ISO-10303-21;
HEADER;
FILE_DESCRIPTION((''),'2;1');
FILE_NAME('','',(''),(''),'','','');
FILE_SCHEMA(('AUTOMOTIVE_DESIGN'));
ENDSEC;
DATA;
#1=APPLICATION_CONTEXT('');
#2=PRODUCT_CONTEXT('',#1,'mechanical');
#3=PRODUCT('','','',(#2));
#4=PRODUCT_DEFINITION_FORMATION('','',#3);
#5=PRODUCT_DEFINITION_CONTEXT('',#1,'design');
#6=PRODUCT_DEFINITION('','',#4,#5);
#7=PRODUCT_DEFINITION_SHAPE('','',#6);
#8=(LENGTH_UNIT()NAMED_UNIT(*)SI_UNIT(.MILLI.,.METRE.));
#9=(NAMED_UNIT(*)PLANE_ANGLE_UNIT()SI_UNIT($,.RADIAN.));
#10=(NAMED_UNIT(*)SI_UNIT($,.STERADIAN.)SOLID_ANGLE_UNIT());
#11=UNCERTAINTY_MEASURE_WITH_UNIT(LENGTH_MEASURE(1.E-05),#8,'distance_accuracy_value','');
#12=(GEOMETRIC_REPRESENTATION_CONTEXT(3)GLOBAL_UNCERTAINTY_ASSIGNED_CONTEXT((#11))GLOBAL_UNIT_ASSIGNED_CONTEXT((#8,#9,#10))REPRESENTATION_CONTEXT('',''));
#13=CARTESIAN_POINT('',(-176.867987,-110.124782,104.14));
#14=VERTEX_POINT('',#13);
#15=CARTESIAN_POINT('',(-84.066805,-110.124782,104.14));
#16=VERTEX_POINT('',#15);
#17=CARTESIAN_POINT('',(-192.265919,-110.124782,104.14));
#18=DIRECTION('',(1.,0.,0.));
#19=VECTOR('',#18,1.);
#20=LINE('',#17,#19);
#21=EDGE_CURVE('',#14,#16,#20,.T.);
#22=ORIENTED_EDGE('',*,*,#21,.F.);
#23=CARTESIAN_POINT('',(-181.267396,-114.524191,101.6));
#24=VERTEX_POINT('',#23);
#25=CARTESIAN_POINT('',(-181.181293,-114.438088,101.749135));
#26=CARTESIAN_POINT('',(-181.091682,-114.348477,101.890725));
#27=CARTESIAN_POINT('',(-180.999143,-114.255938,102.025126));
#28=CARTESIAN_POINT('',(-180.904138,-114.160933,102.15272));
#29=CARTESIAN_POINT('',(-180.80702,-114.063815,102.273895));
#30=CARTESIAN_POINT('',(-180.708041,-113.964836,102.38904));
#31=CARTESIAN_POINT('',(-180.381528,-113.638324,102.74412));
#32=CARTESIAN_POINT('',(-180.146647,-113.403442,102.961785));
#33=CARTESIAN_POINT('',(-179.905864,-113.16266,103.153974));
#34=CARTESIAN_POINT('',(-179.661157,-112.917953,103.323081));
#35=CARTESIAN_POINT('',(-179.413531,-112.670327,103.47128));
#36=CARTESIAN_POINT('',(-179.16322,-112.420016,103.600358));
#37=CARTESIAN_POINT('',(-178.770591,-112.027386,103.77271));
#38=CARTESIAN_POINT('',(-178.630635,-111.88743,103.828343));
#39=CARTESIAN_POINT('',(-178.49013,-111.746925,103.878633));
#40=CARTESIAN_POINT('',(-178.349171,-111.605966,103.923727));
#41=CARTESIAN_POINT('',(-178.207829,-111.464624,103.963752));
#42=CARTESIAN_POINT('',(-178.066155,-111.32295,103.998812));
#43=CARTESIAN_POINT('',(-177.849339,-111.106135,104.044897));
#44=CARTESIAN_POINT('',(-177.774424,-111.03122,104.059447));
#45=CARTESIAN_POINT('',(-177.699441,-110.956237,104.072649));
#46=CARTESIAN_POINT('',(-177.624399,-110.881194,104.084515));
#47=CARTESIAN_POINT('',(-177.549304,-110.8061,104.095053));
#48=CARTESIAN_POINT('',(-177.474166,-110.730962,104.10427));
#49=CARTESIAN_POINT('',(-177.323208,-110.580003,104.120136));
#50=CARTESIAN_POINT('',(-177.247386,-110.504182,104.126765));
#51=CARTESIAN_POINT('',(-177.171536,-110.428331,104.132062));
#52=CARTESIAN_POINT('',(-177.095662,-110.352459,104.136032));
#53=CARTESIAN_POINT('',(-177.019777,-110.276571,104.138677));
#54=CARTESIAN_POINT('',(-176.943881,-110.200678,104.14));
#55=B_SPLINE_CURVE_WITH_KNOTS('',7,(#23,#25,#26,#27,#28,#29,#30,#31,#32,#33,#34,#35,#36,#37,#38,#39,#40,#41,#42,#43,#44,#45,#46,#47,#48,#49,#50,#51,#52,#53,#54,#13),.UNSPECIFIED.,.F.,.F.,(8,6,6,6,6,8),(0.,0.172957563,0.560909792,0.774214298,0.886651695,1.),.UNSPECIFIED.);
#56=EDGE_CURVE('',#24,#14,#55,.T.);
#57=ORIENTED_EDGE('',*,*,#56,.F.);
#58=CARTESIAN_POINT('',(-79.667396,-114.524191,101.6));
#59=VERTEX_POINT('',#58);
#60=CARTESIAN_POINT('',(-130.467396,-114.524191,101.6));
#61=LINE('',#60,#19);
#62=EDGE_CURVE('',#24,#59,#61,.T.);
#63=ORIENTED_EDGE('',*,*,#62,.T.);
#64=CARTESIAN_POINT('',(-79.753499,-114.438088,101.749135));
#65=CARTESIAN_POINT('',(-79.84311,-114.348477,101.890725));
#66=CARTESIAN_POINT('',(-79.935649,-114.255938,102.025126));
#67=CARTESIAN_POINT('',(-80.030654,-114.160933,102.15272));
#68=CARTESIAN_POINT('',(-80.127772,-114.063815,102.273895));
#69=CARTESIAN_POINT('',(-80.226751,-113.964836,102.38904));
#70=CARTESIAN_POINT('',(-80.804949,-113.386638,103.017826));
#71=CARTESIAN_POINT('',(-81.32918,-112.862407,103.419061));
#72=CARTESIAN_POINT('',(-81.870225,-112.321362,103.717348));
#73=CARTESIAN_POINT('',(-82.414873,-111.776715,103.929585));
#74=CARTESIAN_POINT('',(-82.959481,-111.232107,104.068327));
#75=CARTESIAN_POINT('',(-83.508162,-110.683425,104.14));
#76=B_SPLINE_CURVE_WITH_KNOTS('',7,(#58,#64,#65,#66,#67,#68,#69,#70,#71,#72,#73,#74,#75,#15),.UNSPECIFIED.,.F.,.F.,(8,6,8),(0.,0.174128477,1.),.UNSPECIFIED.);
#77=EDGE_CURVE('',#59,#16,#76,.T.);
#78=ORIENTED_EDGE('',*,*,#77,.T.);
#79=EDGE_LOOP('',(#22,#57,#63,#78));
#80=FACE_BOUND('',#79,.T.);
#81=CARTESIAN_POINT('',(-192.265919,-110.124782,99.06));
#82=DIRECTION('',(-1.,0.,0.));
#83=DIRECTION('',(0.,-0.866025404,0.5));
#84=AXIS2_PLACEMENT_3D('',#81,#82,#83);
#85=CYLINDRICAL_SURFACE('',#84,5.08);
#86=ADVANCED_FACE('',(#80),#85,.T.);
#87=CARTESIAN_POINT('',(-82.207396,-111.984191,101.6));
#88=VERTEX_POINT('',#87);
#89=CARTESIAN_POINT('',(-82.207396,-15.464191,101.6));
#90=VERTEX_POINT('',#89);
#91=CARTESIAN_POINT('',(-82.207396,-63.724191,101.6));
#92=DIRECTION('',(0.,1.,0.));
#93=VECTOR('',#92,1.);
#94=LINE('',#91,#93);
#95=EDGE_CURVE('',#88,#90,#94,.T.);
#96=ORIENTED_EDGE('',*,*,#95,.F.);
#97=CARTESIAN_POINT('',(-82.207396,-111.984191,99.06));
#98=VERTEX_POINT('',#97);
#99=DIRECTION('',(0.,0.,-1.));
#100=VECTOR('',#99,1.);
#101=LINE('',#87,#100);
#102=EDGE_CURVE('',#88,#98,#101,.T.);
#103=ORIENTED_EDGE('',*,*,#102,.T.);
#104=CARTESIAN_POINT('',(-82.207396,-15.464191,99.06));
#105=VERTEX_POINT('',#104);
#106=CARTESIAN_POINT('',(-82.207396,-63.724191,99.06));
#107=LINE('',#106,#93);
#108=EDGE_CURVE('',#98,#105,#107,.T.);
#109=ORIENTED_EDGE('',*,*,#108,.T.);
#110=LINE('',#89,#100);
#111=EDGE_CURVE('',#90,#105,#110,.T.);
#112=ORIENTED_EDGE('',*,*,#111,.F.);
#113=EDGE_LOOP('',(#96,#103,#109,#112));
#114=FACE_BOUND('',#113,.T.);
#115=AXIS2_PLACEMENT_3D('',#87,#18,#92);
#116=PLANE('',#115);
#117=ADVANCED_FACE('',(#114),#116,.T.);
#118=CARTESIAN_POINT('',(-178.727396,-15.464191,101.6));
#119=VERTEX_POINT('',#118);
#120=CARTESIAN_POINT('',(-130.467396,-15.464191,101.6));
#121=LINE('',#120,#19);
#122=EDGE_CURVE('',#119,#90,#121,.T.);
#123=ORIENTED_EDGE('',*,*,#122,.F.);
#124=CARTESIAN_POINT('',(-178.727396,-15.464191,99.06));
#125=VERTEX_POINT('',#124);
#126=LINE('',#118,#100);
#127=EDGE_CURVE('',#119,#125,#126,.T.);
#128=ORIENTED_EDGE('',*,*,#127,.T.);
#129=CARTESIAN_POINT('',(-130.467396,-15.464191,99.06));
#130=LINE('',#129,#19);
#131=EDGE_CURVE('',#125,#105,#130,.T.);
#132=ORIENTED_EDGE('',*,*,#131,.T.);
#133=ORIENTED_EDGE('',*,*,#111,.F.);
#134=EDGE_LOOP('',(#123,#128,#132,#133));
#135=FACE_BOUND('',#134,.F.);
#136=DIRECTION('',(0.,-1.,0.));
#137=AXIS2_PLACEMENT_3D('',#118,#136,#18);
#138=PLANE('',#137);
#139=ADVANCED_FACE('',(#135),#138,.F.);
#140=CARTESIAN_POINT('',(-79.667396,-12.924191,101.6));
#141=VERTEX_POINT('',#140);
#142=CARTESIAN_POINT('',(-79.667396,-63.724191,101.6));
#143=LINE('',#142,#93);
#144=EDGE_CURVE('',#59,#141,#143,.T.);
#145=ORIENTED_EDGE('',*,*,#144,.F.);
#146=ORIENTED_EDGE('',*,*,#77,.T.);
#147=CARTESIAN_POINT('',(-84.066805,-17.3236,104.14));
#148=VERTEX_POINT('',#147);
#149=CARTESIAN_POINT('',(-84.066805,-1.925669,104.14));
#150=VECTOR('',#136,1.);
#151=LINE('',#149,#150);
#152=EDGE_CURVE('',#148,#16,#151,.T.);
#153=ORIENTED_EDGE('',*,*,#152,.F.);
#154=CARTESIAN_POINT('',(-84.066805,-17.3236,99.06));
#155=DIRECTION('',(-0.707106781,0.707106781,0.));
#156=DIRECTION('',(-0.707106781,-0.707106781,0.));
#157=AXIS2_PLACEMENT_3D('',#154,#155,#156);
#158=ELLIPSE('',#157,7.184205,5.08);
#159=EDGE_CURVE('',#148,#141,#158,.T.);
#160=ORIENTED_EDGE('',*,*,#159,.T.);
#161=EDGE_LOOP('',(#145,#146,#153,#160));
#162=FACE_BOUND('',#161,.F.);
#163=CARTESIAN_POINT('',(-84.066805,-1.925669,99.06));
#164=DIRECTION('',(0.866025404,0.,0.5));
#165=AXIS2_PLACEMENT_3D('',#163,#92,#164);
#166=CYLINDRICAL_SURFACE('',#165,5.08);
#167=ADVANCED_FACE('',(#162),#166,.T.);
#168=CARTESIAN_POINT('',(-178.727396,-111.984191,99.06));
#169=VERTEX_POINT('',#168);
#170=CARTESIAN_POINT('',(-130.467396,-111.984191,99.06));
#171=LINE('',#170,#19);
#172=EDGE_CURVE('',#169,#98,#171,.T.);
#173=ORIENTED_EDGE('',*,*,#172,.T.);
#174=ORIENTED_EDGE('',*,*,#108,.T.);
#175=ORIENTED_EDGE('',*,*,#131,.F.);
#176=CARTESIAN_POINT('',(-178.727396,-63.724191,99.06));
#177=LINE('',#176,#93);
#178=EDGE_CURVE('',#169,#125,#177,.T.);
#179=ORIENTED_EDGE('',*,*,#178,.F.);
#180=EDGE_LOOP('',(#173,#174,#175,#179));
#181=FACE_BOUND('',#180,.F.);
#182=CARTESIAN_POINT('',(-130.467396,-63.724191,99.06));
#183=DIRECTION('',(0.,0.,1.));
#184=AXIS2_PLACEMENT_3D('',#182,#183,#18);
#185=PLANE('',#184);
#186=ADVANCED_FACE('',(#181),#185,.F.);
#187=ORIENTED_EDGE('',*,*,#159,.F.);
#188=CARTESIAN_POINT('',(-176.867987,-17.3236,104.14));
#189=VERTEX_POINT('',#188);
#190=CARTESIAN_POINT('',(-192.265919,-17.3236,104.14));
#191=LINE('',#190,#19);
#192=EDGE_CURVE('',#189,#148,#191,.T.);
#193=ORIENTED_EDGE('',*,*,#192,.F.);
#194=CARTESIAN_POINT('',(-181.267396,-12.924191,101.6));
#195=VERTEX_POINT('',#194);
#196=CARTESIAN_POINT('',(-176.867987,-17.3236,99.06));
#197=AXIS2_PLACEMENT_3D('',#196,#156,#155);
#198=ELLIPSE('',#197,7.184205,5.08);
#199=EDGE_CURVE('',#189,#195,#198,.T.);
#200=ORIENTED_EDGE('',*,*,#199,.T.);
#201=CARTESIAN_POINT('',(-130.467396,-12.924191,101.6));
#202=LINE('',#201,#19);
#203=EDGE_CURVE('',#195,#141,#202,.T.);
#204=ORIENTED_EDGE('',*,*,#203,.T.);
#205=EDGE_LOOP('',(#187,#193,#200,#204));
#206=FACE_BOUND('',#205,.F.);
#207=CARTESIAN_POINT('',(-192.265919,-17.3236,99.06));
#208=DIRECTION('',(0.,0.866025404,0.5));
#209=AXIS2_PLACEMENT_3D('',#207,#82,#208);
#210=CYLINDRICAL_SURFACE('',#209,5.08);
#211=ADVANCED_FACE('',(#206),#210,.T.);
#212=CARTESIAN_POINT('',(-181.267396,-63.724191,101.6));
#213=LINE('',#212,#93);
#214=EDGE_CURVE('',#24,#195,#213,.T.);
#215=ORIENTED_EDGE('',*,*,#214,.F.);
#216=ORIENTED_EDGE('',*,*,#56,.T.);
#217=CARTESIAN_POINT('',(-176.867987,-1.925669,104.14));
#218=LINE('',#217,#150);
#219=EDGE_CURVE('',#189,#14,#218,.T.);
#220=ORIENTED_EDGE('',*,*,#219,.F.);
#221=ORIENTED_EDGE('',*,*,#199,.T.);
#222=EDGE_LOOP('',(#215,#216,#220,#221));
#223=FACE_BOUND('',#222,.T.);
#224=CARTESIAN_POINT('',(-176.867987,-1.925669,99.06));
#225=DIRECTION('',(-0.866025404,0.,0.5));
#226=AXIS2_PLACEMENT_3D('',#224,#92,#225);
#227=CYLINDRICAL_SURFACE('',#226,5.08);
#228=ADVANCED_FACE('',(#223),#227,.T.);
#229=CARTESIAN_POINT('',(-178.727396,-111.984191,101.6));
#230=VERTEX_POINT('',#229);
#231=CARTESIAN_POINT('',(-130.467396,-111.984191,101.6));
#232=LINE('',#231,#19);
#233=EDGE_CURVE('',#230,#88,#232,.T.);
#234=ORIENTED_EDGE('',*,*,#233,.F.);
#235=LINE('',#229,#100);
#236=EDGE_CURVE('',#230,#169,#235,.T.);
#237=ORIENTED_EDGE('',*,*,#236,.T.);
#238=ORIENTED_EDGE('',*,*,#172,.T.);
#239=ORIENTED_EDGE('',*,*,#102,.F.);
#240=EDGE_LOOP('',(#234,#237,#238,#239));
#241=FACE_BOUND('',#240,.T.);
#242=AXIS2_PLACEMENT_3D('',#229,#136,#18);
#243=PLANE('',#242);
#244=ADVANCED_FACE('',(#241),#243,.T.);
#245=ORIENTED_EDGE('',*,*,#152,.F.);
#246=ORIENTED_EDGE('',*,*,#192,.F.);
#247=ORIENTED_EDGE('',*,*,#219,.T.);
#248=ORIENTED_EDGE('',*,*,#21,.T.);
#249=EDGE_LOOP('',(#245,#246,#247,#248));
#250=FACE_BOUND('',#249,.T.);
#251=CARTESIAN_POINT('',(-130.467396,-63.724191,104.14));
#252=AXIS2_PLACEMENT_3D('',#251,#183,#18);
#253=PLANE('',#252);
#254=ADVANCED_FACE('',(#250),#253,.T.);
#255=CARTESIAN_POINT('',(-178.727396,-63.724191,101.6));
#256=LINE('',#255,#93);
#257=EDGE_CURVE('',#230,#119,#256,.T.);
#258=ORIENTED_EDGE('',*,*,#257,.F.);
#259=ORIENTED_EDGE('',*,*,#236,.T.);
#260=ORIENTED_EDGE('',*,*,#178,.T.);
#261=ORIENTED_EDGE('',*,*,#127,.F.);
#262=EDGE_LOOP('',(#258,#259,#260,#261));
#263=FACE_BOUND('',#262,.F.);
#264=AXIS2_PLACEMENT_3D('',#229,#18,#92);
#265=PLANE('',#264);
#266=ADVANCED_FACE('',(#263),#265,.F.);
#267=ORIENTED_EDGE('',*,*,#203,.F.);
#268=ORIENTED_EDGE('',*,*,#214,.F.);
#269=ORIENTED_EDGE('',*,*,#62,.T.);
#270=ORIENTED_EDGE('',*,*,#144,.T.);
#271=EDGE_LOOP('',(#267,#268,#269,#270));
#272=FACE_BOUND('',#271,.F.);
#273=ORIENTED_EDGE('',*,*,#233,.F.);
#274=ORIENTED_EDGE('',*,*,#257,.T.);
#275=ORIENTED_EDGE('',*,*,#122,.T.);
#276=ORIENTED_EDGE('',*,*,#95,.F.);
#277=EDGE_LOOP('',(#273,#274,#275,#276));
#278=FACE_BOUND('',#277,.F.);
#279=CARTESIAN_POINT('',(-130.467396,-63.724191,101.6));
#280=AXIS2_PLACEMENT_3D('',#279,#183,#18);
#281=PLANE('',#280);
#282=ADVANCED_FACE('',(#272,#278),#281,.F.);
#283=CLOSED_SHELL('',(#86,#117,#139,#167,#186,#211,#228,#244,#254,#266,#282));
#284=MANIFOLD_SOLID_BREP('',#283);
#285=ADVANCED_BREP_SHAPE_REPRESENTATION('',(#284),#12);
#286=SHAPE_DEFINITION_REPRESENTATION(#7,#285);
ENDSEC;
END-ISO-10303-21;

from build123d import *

# Parameters (mm, degrees)
F1_W        = 101.6
F1_H        = 101.6
F1_W_2      = 96.52
F1_H_2      = 96.52
F2_DEPTH    = 2.54
F3_T1_DEPTH = 123.5970452561
F3_T3_DEPTH = 123.5970452561
F4_DEPTH    = 2.54


# Not quite as in the source:
# - a fillet or chamfer that OpenCascade refuses, or shapes differently, is made with other operations: its cross-section is extruded or revolved along the edge and cut away or added


with BuildPart() as f2:
    # F1 (on offset) → F2 (new body)
    with BuildSketch(Plane.XY.offset(101.6)):
        with Locations((-130.4673959928, -63.7241914409)):
            Rectangle(F1_W, F1_H)
        with Locations((-130.4673959928, -63.7241914409)):
            Rectangle(F1_W_2, F1_H_2, mode=Mode.SUBTRACT)
        with Locations((-130.4673959928, -63.7241914409)):
            Rectangle(F1_W_2, F1_H_2)
    extrude(amount=F2_DEPTH)

    # F3: fillet of radius 5.08 on 4 edges, made by hand

    # F3_s2 → F3_t1 (cut)
    with BuildSketch(Plane.YZ.offset(-192.2659186209)):
        with BuildLine():
            ThreePointArc((-114.5241914409, 101.6), (-112.6647823896, 103.4594090512), (-110.1247823896, 104.14))
            Line((-110.1247823896, 104.14), (-114.5241914409, 104.14))
            Line((-114.5241914409, 104.14), (-114.5241914409, 101.6))
        make_face()
        with BuildLine():
            ThreePointArc((-12.9241914409, 101.6), (-14.7836004921, 103.4594090512), (-17.3236004921, 104.14))
            Line((-17.3236004921, 104.14), (-12.9241914409, 104.14))
            Line((-12.9241914409, 104.14), (-12.9241914409, 101.6))
        make_face()
    extrude(amount=F3_T1_DEPTH, mode=Mode.SUBTRACT)

    # F3_s4 → F3_t3 (cut)
    with BuildSketch(Plane.XZ.offset(1.9256688128)):
        with BuildLine():
            ThreePointArc((-79.6673959928, 101.6), (-81.526805044, 103.4594090512), (-84.066805044, 104.14))
            Line((-84.066805044, 104.14), (-79.6673959928, 104.14))
            Line((-79.6673959928, 104.14), (-79.6673959928, 101.6))
        make_face()
        with BuildLine():
            ThreePointArc((-181.2673959928, 101.6), (-179.4079869416, 103.4594090512), (-176.8679869416, 104.14))
            Line((-176.8679869416, 104.14), (-181.2673959928, 104.14))
            Line((-181.2673959928, 104.14), (-181.2673959928, 101.6))
        make_face()
    extrude(amount=F3_T3_DEPTH, mode=Mode.SUBTRACT)

    # F1 (on offset) → F4 (join)
    with BuildSketch(Plane.XY.offset(101.6)):
        with Locations((-130.4673959928, -63.7241914409)):
            Rectangle(F1_W_2, F1_H_2)
    extrude(amount=-F4_DEPTH)


solid = f2.part
